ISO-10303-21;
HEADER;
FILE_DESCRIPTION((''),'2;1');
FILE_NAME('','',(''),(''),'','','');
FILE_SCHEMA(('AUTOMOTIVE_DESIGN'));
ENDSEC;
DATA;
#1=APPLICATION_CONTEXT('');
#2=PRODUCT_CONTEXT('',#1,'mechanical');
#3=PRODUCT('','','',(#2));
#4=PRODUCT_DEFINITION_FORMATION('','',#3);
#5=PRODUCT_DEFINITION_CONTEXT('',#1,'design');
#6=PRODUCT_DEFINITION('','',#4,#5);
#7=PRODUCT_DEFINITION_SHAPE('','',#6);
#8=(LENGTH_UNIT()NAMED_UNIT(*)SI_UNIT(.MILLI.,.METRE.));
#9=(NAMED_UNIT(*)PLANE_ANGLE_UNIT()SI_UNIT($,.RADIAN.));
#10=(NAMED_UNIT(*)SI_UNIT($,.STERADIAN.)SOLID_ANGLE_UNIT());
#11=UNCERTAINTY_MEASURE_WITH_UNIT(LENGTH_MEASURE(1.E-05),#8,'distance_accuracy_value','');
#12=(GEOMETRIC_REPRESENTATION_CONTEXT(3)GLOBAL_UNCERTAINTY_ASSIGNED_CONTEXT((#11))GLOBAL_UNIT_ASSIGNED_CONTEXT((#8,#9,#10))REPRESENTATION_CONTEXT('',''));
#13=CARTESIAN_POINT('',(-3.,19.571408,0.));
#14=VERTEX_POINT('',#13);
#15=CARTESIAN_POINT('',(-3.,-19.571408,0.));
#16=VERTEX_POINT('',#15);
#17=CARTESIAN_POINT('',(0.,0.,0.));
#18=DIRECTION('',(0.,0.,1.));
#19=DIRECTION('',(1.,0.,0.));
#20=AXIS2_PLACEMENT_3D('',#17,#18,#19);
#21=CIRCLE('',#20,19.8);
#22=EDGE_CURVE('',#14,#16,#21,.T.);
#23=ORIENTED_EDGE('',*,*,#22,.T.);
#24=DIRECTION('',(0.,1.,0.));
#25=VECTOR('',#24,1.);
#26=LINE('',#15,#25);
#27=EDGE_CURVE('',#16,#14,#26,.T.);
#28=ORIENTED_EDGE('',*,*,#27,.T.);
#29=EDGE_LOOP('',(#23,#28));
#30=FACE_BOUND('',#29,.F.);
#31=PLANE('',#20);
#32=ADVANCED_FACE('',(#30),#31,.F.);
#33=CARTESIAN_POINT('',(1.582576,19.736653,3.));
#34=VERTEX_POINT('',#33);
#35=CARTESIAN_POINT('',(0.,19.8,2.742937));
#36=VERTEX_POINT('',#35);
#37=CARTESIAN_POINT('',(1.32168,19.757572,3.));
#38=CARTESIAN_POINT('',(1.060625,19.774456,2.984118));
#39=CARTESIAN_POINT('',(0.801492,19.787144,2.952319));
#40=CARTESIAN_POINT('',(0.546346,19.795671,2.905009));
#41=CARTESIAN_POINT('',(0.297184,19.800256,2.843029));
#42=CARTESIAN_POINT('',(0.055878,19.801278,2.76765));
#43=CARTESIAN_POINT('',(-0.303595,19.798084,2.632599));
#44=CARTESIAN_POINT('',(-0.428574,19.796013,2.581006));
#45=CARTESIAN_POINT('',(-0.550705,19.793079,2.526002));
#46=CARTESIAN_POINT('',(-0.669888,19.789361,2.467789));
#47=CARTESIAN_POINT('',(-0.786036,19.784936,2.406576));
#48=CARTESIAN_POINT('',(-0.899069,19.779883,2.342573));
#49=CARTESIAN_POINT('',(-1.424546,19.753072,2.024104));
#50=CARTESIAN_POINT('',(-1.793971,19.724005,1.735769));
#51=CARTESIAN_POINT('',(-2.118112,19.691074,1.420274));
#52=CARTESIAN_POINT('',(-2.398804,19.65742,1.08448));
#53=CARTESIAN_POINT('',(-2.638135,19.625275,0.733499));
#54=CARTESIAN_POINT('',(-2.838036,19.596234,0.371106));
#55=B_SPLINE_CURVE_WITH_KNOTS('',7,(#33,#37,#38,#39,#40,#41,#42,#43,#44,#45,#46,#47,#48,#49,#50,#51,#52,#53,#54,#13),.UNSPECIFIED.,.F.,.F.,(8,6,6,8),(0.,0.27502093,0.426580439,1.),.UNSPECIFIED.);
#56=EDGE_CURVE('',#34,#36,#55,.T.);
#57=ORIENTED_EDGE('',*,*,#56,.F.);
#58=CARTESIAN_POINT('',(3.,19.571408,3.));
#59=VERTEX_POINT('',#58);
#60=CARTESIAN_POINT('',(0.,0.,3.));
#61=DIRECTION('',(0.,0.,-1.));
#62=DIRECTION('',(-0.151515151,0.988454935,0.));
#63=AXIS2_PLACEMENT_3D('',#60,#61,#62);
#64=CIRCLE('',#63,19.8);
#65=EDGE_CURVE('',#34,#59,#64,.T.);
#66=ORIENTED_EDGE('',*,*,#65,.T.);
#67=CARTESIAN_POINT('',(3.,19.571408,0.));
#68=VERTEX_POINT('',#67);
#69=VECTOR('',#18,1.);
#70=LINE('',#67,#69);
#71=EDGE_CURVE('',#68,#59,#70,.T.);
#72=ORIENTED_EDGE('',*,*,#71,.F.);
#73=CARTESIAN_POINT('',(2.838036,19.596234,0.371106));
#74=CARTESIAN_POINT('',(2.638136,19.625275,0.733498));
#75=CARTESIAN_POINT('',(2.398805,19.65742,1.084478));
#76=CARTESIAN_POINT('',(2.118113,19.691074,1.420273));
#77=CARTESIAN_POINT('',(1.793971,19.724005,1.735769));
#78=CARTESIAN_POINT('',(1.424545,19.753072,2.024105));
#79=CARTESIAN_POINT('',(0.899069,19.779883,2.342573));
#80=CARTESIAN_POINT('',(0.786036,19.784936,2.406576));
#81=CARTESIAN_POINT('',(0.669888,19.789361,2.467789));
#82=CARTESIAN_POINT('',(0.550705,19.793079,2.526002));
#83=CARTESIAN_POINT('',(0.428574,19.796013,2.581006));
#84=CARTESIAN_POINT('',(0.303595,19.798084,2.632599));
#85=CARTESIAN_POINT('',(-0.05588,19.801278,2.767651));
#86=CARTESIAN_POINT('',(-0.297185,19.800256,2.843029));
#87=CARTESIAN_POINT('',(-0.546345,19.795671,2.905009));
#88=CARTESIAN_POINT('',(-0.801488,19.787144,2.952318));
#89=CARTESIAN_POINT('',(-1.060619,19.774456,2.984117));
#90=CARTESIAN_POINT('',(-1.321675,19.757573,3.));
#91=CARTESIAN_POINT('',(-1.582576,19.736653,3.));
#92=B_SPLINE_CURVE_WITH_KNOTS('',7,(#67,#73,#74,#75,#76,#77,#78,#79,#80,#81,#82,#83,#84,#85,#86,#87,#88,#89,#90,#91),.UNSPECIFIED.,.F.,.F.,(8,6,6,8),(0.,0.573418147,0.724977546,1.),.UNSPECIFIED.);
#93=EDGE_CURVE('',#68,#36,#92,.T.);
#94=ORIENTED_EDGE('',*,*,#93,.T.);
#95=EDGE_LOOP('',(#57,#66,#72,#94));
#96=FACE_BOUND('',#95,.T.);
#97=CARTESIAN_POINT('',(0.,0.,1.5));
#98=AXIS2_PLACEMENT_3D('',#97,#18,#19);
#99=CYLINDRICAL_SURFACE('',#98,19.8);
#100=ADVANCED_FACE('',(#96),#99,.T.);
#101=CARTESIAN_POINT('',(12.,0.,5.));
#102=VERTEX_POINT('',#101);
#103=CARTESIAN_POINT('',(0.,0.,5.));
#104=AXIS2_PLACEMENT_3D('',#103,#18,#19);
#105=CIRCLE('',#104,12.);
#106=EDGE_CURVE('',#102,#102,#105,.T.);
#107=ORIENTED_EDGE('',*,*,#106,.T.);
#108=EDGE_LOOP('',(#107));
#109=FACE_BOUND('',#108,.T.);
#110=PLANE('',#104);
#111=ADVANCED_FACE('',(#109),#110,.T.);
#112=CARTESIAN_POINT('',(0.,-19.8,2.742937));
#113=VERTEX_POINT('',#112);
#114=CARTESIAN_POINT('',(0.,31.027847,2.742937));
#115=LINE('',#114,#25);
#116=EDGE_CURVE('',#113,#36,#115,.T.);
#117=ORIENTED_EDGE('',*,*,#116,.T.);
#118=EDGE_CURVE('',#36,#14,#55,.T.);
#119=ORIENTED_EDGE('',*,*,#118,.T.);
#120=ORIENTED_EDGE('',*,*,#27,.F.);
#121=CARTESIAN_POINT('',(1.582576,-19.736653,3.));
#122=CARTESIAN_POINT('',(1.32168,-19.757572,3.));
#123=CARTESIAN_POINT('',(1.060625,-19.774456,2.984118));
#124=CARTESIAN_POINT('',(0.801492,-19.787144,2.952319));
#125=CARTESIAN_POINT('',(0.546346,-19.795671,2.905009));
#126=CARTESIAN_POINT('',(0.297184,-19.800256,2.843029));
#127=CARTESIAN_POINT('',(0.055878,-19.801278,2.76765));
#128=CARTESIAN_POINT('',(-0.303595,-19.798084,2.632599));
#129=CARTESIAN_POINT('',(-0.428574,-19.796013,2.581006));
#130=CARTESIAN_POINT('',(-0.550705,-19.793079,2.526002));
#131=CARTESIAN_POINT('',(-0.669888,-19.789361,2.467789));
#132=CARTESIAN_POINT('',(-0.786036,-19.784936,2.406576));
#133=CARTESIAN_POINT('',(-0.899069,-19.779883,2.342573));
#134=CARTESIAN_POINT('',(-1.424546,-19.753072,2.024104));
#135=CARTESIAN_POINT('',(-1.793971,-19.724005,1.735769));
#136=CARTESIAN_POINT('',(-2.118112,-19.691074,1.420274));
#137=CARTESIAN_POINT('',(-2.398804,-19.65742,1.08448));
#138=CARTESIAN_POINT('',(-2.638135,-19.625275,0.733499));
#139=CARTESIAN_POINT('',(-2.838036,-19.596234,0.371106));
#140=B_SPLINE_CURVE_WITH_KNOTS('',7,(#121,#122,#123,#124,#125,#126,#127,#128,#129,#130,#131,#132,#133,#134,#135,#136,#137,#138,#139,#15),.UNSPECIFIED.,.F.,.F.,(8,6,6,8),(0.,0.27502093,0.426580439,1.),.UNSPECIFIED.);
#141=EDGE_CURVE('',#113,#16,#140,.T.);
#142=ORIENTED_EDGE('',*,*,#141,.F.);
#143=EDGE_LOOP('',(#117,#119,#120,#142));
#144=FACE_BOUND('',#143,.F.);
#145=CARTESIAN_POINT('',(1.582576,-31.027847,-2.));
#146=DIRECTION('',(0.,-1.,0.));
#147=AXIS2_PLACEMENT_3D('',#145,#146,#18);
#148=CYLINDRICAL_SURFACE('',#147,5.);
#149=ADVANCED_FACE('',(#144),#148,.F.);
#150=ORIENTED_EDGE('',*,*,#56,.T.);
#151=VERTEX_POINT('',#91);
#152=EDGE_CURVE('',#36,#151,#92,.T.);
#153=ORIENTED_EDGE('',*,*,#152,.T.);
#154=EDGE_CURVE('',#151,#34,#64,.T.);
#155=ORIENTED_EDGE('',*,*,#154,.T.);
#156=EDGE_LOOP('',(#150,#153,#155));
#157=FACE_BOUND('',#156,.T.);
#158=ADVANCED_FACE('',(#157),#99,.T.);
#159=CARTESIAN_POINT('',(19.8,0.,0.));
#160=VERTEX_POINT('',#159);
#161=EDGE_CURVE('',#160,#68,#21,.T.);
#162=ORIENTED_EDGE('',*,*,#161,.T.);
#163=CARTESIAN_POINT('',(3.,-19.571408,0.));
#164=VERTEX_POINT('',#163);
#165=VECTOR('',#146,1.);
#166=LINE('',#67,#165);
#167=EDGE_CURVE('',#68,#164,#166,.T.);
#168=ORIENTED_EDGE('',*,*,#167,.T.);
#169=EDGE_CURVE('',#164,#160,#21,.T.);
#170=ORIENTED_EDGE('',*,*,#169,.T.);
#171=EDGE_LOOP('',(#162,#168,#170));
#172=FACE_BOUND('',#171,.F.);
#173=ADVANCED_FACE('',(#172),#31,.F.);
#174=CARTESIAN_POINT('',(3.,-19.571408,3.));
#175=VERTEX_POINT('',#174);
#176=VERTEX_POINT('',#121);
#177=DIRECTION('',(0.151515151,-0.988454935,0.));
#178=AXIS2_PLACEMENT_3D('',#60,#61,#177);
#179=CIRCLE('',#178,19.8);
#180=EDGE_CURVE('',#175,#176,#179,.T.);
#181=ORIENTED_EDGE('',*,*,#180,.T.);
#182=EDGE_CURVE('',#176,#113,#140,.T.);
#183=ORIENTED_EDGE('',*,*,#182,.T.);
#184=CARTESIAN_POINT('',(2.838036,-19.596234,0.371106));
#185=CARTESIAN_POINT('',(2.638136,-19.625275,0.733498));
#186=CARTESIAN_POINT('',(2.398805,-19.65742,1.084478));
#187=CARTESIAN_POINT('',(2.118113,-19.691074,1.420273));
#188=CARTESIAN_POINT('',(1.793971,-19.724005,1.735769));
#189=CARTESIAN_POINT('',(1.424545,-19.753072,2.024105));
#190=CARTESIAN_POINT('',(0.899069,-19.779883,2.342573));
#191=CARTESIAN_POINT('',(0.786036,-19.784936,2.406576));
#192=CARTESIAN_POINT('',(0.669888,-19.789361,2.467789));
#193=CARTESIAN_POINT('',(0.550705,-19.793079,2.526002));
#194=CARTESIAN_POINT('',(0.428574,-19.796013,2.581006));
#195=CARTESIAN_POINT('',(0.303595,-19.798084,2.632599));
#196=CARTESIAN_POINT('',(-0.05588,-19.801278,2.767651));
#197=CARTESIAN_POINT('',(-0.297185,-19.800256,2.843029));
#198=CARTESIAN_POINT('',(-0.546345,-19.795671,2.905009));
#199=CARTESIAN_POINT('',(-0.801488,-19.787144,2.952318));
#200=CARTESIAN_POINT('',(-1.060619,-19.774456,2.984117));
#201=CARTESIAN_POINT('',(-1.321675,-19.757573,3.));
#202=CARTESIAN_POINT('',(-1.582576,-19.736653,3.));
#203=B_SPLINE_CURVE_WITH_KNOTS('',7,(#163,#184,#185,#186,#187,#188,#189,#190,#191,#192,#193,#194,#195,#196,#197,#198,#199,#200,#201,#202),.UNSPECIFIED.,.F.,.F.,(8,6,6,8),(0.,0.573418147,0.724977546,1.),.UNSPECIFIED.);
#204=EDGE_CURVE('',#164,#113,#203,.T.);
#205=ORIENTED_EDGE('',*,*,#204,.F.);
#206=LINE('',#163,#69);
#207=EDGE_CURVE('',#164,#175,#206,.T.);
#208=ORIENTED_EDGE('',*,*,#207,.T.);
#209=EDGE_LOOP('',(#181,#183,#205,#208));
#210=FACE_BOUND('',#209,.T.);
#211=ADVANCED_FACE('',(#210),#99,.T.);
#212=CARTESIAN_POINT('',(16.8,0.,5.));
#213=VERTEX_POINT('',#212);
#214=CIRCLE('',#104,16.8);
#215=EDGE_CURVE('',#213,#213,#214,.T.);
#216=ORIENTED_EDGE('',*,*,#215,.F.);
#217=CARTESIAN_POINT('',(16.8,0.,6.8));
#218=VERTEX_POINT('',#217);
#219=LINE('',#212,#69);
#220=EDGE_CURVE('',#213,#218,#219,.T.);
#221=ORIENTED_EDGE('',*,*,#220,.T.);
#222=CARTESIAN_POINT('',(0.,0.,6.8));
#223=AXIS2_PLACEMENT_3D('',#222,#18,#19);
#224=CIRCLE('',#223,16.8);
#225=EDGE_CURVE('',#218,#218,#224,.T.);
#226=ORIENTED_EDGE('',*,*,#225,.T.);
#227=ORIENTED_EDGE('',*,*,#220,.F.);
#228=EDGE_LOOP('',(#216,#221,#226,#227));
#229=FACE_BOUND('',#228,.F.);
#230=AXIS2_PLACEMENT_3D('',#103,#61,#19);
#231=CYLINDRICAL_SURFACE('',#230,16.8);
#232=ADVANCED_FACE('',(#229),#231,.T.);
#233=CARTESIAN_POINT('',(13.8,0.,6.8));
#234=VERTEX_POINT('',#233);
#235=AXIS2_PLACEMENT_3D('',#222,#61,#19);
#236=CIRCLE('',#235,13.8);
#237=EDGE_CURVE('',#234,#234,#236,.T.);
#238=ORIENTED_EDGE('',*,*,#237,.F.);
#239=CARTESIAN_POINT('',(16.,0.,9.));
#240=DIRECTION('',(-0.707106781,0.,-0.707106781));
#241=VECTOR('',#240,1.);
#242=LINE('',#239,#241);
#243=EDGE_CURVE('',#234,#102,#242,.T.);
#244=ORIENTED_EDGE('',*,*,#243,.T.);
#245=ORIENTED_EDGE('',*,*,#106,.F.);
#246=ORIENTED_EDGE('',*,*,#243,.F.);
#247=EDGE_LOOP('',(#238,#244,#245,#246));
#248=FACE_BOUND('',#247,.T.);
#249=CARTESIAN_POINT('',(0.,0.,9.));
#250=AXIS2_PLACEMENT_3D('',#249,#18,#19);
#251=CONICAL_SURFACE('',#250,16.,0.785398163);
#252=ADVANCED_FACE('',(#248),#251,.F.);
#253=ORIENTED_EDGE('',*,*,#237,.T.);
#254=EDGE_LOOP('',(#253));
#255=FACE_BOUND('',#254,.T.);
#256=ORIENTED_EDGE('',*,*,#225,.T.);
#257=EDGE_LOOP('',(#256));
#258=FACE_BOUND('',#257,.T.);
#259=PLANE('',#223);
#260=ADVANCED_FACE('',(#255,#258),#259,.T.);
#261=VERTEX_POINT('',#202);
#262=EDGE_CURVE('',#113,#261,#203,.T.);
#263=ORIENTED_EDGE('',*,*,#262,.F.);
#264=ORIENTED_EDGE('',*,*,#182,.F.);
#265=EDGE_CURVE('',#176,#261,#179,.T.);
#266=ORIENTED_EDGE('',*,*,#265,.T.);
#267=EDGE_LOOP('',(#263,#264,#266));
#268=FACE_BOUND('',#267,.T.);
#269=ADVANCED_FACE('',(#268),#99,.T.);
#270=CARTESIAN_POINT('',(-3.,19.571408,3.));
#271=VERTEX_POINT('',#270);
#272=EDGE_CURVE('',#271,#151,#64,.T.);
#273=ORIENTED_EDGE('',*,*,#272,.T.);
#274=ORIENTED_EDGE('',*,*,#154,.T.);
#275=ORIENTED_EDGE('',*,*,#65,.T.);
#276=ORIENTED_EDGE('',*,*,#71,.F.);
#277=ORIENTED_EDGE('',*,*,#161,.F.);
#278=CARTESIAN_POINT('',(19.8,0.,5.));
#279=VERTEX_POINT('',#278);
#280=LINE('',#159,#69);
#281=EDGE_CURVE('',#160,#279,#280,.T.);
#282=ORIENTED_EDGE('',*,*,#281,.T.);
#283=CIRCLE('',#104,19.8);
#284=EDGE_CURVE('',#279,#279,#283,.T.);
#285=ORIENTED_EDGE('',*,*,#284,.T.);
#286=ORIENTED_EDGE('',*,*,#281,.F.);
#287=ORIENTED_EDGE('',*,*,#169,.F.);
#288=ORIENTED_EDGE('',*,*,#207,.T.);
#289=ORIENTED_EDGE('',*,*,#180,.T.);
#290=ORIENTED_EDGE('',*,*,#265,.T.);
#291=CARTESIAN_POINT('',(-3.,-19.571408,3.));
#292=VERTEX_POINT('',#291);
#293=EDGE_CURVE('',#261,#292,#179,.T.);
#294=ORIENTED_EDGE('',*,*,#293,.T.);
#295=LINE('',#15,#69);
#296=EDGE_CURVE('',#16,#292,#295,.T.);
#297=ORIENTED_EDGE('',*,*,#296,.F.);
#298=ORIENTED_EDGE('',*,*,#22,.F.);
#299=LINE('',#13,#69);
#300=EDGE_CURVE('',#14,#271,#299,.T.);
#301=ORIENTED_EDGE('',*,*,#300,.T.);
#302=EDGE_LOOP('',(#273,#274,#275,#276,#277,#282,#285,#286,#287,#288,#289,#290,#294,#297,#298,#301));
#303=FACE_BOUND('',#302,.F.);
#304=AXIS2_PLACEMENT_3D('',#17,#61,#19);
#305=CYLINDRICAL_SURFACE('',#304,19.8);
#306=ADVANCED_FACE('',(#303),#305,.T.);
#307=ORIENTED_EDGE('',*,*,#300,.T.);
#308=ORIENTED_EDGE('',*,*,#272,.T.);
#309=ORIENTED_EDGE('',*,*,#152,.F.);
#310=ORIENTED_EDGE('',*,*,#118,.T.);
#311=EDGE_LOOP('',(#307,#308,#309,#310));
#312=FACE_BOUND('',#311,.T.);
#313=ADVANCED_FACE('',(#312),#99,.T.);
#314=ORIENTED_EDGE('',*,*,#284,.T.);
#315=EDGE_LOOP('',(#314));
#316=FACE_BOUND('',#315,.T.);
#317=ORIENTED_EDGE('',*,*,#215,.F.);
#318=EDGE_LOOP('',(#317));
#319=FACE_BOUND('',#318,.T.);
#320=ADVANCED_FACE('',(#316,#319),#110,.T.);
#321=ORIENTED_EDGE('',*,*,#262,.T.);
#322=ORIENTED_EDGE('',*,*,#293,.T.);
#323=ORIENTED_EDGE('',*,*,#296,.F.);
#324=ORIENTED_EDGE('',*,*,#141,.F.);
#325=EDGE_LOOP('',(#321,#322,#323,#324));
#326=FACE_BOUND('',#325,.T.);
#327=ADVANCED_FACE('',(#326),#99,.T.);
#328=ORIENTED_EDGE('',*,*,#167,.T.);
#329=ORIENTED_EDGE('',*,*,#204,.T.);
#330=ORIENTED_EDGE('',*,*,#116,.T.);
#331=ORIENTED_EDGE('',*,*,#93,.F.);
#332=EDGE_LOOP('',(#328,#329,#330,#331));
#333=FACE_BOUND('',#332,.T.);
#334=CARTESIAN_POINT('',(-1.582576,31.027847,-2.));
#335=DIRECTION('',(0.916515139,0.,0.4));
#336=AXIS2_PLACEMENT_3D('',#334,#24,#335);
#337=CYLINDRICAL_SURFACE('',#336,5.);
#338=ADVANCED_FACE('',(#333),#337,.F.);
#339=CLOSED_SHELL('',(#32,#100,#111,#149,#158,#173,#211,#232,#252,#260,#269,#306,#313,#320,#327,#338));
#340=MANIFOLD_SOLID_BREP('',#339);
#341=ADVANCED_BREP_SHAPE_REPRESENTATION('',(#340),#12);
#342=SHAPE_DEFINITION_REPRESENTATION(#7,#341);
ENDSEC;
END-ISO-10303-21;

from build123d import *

# Parameters (mm, degrees)
F0_R         = 19.8
F1_DEPTH     = 5
F2_R         = 16.8
F2_R_2       = 16
F3_DEPTH     = 1.8
F6_DEPTH     = 3
F7_T4_DEPTH  = 62.0556939075
F7_S5_R      = 19.8
F7_T6_DEPTH  = 33
F7_T10_DEPTH = 62.0556939075
F7_S11_R     = 19.8
F7_T12_DEPTH = 33


# Not quite as in the source:
# - a fillet or chamfer that OpenCascade refuses, or shapes differently, is made with other operations: its cross-section is extruded or revolved along the edge and cut away or added


with BuildPart() as f1:
    # F0 (on Top) → F1 (new body)
    with BuildSketch(Plane.XY):
        Circle(F0_R)
    extrude(amount=F1_DEPTH)

    # F2 (on face) → F3 (join)
    with BuildSketch(Plane.XY.offset(5)):
        Circle(F2_R)
        Circle(F2_R_2, mode=Mode.SUBTRACT)
    extrude(amount=F3_DEPTH)

    # F4: chamfer of 4 on 1 edges, made by hand


with BuildPart() as f4_tool2:
    # F4_s3 → F4_t4 (revolve)
    with BuildSketch(Plane.XZ):
        Polygon((16, 9), (12, 5), (16, 5), align=None)
    revolve(axis=Axis((0, 0, 5), (0, 0, 1)))

    split(bisect_by=Plane.XY.offset(6.8), keep=Keep.BOTTOM)


with BuildPart() as f1_1:
    add(f1.part)

    # F4_t1: union F4_tool2
    add(f4_tool2.part)

    # F5 (on face) → F6 (cut)
    with BuildSketch(Plane(origin=(0, 0, 0), x_dir=(1, 0, 0), z_dir=(0, 0, -1))):
        with BuildLine():
            Line((-3, 19.5714077164), (-3, -19.5714077164))
            ThreePointArc((-3, -19.5714077164), (0, -19.8), (3, -19.5714077164))
            Line((3, -19.5714077164), (3, 19.5714077164))
            ThreePointArc((3, 19.5714077164), (0, 19.8), (-3, 19.5714077164))
        make_face()
    extrude(amount=-F6_DEPTH, mode=Mode.SUBTRACT)

    # F7: fillet of radius 5 on 2 edges, made by hand


with BuildPart() as f7_tool2:
    # F7_s3 → F7_t4 (new body)
    with BuildSketch(Plane.XZ.offset(-31.0278469537)):
        with BuildLine():
            ThreePointArc((3, 0), (1.1560370926, 2.1833001327), (-1.582575695, 3))
            Line((-1.582575695, 3), (3, 3))
            Line((3, 3), (3, 0))
        make_face()
    extrude(amount=F7_T4_DEPTH)

    # F7_s5 → F7_t6 (intersect, symmetric)
    with BuildSketch(Plane.XY.offset(1.5)):
        Circle(F7_S5_R)
    extrude(amount=F7_T6_DEPTH, both=True, mode=Mode.INTERSECT)


with BuildPart() as f1_2:
    add(f1_1.part)

    # F7_t1: union F7_tool2
    add(f7_tool2.part)


with BuildPart() as f7_tool8:
    # F7_s9 → F7_t10 (new body)
    with BuildSketch(Plane.XZ.offset(31.0278469537)):
        with BuildLine():
            ThreePointArc((1.582575695, 3), (-1.1560370926, 2.1833001327), (-3, 0))
            Line((-3, 0), (-3, 3))
            Line((-3, 3), (1.582575695, 3))
        make_face()
    extrude(amount=-F7_T10_DEPTH)

    # F7_s11 → F7_t12 (intersect, symmetric)
    with BuildSketch(Plane.XY.offset(1.5)):
        Circle(F7_S11_R)
    extrude(amount=F7_T12_DEPTH, both=True, mode=Mode.INTERSECT)


with BuildPart() as f1_3:
    add(f1_2.part)

    # F7_t7: union F7_tool8
    add(f7_tool8.part)


solid = f1_3.part
